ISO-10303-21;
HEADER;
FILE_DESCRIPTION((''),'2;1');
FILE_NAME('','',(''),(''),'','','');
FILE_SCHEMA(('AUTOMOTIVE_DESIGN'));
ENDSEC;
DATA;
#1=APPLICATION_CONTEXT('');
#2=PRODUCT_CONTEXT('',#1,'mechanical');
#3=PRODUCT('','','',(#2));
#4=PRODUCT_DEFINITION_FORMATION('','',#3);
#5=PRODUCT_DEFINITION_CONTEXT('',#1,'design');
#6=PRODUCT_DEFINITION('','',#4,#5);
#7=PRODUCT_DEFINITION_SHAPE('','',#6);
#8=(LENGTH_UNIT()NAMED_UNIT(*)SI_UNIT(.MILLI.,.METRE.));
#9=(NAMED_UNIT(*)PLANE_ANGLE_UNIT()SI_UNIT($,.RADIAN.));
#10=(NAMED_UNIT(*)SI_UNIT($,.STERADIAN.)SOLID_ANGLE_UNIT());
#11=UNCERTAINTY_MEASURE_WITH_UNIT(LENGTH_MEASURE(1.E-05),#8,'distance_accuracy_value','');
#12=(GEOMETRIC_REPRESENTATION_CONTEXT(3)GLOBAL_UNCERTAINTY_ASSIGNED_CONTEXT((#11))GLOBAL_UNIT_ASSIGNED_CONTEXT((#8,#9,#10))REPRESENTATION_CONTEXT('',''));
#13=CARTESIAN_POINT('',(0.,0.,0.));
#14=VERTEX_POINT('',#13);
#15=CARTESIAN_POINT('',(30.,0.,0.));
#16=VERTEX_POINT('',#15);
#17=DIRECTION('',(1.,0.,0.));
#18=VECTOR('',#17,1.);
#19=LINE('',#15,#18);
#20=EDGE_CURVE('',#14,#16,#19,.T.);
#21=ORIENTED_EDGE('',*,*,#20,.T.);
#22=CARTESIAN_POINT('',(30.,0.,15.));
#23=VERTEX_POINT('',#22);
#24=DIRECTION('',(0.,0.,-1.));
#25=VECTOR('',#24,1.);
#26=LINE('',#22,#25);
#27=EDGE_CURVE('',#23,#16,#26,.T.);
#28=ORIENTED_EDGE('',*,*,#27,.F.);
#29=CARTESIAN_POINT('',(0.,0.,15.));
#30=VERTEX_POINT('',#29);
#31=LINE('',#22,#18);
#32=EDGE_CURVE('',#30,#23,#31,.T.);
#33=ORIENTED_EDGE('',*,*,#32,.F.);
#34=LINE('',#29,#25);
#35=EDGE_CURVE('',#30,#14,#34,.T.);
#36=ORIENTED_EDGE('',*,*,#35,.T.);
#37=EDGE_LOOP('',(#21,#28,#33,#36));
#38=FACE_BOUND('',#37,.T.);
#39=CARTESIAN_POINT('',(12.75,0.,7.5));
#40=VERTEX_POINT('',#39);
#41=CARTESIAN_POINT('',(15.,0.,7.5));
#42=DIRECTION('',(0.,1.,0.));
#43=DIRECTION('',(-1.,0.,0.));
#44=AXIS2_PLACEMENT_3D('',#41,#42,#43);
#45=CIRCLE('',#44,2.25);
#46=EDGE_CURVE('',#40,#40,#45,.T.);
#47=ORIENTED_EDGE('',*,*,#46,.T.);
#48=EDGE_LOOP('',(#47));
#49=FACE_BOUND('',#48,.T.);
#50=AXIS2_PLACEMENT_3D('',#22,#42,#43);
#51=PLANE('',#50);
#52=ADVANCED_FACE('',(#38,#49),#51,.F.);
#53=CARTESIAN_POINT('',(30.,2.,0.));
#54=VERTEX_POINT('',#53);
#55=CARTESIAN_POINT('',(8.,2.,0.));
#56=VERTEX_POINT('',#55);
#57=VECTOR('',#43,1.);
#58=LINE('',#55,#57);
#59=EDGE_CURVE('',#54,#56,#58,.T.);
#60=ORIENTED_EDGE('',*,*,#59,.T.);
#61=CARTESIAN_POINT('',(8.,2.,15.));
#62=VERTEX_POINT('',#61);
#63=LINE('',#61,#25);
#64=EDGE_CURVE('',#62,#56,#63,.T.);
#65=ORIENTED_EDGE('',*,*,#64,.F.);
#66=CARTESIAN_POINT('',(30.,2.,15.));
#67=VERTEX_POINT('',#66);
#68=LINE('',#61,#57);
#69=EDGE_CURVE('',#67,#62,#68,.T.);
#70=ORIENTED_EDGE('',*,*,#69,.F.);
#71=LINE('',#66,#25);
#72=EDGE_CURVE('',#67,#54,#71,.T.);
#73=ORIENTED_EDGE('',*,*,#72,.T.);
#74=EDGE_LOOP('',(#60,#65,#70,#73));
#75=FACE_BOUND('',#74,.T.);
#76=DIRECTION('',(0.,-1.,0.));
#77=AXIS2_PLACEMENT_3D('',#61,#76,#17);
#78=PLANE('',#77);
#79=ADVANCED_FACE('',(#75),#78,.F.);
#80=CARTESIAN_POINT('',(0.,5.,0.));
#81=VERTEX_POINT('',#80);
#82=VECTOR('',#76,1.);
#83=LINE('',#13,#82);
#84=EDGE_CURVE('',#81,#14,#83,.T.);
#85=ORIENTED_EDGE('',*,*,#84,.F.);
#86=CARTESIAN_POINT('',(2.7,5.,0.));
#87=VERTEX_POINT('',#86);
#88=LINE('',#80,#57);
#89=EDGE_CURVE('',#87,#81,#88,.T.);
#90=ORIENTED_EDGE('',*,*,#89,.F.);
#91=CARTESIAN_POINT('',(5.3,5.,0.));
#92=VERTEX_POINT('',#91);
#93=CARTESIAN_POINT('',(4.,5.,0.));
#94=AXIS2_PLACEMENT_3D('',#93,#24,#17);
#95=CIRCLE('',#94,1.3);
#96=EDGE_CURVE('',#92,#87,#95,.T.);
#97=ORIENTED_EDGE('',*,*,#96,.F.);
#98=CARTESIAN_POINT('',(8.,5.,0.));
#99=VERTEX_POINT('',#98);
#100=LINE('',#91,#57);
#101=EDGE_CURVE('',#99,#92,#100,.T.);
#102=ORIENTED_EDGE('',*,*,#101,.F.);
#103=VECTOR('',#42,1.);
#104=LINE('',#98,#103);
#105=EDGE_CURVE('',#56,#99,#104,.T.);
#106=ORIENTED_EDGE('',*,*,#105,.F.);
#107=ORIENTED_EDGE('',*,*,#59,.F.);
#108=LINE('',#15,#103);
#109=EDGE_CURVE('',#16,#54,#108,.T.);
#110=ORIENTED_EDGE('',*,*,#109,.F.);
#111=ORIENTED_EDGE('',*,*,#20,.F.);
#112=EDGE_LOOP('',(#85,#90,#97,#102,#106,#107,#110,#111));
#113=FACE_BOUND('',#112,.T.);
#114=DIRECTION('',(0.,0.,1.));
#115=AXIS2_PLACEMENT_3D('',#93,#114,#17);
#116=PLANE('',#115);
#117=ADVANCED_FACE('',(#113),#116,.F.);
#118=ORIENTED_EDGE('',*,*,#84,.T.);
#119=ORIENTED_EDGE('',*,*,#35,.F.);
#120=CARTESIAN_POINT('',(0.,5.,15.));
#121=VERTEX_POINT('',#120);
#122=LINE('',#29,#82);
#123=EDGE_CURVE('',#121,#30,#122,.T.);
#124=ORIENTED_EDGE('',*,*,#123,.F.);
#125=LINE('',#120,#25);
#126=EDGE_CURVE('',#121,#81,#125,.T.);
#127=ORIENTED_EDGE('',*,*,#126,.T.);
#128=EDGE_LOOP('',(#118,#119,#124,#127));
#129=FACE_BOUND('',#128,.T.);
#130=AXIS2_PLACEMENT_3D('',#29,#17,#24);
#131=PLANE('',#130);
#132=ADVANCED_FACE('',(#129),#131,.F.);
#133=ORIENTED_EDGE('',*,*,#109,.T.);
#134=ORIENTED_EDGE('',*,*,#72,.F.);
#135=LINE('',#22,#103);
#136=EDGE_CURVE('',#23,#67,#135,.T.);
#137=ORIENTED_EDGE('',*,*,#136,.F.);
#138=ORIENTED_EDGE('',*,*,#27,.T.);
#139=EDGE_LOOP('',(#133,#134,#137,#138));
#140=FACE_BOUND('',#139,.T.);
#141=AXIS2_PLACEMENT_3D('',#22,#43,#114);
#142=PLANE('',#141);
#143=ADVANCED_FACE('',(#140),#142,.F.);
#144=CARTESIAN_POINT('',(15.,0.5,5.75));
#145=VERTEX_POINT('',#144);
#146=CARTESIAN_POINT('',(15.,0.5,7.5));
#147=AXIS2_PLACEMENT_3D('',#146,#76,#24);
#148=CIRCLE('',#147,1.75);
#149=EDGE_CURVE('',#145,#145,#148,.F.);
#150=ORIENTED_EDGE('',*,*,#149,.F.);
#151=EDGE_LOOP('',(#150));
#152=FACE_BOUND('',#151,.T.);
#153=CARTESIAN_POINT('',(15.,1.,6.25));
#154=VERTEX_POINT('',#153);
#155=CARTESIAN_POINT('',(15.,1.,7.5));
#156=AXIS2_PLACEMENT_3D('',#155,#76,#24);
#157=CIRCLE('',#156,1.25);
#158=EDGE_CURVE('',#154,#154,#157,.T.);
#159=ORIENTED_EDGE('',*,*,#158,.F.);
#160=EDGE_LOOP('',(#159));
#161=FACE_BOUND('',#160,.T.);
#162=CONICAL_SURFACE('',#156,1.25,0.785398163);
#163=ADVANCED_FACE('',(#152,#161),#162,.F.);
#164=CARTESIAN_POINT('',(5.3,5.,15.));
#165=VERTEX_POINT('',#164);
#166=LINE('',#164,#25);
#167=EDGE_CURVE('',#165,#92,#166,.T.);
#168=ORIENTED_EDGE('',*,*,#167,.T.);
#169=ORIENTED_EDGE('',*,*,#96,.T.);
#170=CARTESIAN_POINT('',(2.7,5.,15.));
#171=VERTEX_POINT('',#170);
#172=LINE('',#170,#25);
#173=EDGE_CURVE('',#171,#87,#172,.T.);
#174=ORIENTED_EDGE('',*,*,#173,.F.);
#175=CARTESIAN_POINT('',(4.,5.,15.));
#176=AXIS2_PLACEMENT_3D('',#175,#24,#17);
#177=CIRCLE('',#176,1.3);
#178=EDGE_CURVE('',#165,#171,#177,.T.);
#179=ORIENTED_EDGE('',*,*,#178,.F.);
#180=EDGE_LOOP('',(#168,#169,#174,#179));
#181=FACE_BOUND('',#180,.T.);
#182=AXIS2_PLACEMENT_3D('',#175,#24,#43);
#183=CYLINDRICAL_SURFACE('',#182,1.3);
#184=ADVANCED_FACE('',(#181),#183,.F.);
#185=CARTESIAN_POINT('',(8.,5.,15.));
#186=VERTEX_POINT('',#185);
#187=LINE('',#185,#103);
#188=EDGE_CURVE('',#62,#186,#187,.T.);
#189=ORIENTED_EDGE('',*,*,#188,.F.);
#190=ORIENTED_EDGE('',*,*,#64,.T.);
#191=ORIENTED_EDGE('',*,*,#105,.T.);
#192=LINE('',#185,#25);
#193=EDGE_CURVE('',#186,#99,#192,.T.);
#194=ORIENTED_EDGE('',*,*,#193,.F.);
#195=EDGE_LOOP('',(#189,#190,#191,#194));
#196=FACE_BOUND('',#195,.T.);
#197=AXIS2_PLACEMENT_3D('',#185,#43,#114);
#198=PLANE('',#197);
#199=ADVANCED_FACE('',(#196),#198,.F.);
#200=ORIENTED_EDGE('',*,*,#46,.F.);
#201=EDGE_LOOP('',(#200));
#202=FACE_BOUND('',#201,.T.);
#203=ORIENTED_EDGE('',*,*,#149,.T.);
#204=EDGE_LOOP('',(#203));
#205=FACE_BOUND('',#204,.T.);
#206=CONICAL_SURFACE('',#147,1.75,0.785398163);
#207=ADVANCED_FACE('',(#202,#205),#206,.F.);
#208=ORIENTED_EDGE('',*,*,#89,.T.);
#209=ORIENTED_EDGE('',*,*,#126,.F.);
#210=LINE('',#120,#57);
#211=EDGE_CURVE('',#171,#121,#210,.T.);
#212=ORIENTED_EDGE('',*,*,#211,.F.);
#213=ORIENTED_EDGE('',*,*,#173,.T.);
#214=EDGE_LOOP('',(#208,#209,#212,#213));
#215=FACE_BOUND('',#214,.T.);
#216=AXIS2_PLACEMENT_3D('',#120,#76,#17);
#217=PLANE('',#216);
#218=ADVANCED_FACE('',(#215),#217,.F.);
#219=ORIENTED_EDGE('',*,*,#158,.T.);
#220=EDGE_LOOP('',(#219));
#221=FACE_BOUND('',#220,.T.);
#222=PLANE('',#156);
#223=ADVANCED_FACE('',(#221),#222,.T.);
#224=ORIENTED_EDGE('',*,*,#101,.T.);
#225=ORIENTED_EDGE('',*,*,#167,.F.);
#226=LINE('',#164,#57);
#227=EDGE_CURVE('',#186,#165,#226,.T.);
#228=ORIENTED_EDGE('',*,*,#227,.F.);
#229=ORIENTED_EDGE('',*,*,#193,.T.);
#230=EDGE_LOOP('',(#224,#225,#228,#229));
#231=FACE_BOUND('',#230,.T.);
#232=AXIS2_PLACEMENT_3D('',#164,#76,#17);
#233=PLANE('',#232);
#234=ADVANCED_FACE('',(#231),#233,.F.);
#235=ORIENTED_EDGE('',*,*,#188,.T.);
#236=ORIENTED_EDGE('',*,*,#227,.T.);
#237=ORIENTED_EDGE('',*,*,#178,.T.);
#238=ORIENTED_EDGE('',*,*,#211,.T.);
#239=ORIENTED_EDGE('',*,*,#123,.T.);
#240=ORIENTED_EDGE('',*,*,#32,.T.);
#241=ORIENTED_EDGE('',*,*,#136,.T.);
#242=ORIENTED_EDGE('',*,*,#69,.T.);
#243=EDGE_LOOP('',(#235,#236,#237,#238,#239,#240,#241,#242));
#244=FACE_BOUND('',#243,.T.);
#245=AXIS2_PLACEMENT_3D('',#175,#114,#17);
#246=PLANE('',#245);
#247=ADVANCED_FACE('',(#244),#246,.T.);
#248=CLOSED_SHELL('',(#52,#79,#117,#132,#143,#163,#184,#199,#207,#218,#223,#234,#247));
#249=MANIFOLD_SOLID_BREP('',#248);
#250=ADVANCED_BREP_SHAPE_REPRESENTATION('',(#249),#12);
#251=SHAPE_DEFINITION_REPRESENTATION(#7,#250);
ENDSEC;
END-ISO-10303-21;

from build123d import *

# Parameters (mm, degrees)
BOSS_EXTRUDE1_DEPTH = 15
SKETCH3_R           = 1.75
CUT_EXTRUDE1_DEPTH  = 1
CHAMFER1_SIZE       = 0.5


with BuildPart() as part:
    # Sketch2 → Boss-Extrude1 (new body)
    with BuildSketch(Plane.XY):
        with BuildLine():
            Line((0, 0), (0, 5))
            Line((0, 5), (2.7, 5))
            ThreePointArc((2.7, 5), (4, 3.7), (5.3, 5))
            Line((5.3, 5), (8, 5))
            Line((8, 5), (8, 2))
            Line((8, 2), (30, 2))
            Line((30, 2), (30, 0))
            Line((30, 0), (0, 0))
        make_face()
    extrude(amount=BOSS_EXTRUDE1_DEPTH)

    # Sketch3 → Cut-Extrude1 (cut)
    with BuildSketch(Plane.XZ):
        with Locations(Location((15, 7.5, 0), (0, 0, 270))):
            Circle(SKETCH3_R)
    extrude(amount=-CUT_EXTRUDE1_DEPTH, mode=Mode.SUBTRACT)

    # Chamfer1
    chamfer1_edges = [part.edges().sort_by_distance(p)[0] for p in [
        (15, 1, 9.25),
        (15, 0, 9.25),
    ]]
    chamfer(chamfer1_edges, length=CHAMFER1_SIZE - 0.0001)  # a hair under: the kernel refuses the full size


solid = part.part
